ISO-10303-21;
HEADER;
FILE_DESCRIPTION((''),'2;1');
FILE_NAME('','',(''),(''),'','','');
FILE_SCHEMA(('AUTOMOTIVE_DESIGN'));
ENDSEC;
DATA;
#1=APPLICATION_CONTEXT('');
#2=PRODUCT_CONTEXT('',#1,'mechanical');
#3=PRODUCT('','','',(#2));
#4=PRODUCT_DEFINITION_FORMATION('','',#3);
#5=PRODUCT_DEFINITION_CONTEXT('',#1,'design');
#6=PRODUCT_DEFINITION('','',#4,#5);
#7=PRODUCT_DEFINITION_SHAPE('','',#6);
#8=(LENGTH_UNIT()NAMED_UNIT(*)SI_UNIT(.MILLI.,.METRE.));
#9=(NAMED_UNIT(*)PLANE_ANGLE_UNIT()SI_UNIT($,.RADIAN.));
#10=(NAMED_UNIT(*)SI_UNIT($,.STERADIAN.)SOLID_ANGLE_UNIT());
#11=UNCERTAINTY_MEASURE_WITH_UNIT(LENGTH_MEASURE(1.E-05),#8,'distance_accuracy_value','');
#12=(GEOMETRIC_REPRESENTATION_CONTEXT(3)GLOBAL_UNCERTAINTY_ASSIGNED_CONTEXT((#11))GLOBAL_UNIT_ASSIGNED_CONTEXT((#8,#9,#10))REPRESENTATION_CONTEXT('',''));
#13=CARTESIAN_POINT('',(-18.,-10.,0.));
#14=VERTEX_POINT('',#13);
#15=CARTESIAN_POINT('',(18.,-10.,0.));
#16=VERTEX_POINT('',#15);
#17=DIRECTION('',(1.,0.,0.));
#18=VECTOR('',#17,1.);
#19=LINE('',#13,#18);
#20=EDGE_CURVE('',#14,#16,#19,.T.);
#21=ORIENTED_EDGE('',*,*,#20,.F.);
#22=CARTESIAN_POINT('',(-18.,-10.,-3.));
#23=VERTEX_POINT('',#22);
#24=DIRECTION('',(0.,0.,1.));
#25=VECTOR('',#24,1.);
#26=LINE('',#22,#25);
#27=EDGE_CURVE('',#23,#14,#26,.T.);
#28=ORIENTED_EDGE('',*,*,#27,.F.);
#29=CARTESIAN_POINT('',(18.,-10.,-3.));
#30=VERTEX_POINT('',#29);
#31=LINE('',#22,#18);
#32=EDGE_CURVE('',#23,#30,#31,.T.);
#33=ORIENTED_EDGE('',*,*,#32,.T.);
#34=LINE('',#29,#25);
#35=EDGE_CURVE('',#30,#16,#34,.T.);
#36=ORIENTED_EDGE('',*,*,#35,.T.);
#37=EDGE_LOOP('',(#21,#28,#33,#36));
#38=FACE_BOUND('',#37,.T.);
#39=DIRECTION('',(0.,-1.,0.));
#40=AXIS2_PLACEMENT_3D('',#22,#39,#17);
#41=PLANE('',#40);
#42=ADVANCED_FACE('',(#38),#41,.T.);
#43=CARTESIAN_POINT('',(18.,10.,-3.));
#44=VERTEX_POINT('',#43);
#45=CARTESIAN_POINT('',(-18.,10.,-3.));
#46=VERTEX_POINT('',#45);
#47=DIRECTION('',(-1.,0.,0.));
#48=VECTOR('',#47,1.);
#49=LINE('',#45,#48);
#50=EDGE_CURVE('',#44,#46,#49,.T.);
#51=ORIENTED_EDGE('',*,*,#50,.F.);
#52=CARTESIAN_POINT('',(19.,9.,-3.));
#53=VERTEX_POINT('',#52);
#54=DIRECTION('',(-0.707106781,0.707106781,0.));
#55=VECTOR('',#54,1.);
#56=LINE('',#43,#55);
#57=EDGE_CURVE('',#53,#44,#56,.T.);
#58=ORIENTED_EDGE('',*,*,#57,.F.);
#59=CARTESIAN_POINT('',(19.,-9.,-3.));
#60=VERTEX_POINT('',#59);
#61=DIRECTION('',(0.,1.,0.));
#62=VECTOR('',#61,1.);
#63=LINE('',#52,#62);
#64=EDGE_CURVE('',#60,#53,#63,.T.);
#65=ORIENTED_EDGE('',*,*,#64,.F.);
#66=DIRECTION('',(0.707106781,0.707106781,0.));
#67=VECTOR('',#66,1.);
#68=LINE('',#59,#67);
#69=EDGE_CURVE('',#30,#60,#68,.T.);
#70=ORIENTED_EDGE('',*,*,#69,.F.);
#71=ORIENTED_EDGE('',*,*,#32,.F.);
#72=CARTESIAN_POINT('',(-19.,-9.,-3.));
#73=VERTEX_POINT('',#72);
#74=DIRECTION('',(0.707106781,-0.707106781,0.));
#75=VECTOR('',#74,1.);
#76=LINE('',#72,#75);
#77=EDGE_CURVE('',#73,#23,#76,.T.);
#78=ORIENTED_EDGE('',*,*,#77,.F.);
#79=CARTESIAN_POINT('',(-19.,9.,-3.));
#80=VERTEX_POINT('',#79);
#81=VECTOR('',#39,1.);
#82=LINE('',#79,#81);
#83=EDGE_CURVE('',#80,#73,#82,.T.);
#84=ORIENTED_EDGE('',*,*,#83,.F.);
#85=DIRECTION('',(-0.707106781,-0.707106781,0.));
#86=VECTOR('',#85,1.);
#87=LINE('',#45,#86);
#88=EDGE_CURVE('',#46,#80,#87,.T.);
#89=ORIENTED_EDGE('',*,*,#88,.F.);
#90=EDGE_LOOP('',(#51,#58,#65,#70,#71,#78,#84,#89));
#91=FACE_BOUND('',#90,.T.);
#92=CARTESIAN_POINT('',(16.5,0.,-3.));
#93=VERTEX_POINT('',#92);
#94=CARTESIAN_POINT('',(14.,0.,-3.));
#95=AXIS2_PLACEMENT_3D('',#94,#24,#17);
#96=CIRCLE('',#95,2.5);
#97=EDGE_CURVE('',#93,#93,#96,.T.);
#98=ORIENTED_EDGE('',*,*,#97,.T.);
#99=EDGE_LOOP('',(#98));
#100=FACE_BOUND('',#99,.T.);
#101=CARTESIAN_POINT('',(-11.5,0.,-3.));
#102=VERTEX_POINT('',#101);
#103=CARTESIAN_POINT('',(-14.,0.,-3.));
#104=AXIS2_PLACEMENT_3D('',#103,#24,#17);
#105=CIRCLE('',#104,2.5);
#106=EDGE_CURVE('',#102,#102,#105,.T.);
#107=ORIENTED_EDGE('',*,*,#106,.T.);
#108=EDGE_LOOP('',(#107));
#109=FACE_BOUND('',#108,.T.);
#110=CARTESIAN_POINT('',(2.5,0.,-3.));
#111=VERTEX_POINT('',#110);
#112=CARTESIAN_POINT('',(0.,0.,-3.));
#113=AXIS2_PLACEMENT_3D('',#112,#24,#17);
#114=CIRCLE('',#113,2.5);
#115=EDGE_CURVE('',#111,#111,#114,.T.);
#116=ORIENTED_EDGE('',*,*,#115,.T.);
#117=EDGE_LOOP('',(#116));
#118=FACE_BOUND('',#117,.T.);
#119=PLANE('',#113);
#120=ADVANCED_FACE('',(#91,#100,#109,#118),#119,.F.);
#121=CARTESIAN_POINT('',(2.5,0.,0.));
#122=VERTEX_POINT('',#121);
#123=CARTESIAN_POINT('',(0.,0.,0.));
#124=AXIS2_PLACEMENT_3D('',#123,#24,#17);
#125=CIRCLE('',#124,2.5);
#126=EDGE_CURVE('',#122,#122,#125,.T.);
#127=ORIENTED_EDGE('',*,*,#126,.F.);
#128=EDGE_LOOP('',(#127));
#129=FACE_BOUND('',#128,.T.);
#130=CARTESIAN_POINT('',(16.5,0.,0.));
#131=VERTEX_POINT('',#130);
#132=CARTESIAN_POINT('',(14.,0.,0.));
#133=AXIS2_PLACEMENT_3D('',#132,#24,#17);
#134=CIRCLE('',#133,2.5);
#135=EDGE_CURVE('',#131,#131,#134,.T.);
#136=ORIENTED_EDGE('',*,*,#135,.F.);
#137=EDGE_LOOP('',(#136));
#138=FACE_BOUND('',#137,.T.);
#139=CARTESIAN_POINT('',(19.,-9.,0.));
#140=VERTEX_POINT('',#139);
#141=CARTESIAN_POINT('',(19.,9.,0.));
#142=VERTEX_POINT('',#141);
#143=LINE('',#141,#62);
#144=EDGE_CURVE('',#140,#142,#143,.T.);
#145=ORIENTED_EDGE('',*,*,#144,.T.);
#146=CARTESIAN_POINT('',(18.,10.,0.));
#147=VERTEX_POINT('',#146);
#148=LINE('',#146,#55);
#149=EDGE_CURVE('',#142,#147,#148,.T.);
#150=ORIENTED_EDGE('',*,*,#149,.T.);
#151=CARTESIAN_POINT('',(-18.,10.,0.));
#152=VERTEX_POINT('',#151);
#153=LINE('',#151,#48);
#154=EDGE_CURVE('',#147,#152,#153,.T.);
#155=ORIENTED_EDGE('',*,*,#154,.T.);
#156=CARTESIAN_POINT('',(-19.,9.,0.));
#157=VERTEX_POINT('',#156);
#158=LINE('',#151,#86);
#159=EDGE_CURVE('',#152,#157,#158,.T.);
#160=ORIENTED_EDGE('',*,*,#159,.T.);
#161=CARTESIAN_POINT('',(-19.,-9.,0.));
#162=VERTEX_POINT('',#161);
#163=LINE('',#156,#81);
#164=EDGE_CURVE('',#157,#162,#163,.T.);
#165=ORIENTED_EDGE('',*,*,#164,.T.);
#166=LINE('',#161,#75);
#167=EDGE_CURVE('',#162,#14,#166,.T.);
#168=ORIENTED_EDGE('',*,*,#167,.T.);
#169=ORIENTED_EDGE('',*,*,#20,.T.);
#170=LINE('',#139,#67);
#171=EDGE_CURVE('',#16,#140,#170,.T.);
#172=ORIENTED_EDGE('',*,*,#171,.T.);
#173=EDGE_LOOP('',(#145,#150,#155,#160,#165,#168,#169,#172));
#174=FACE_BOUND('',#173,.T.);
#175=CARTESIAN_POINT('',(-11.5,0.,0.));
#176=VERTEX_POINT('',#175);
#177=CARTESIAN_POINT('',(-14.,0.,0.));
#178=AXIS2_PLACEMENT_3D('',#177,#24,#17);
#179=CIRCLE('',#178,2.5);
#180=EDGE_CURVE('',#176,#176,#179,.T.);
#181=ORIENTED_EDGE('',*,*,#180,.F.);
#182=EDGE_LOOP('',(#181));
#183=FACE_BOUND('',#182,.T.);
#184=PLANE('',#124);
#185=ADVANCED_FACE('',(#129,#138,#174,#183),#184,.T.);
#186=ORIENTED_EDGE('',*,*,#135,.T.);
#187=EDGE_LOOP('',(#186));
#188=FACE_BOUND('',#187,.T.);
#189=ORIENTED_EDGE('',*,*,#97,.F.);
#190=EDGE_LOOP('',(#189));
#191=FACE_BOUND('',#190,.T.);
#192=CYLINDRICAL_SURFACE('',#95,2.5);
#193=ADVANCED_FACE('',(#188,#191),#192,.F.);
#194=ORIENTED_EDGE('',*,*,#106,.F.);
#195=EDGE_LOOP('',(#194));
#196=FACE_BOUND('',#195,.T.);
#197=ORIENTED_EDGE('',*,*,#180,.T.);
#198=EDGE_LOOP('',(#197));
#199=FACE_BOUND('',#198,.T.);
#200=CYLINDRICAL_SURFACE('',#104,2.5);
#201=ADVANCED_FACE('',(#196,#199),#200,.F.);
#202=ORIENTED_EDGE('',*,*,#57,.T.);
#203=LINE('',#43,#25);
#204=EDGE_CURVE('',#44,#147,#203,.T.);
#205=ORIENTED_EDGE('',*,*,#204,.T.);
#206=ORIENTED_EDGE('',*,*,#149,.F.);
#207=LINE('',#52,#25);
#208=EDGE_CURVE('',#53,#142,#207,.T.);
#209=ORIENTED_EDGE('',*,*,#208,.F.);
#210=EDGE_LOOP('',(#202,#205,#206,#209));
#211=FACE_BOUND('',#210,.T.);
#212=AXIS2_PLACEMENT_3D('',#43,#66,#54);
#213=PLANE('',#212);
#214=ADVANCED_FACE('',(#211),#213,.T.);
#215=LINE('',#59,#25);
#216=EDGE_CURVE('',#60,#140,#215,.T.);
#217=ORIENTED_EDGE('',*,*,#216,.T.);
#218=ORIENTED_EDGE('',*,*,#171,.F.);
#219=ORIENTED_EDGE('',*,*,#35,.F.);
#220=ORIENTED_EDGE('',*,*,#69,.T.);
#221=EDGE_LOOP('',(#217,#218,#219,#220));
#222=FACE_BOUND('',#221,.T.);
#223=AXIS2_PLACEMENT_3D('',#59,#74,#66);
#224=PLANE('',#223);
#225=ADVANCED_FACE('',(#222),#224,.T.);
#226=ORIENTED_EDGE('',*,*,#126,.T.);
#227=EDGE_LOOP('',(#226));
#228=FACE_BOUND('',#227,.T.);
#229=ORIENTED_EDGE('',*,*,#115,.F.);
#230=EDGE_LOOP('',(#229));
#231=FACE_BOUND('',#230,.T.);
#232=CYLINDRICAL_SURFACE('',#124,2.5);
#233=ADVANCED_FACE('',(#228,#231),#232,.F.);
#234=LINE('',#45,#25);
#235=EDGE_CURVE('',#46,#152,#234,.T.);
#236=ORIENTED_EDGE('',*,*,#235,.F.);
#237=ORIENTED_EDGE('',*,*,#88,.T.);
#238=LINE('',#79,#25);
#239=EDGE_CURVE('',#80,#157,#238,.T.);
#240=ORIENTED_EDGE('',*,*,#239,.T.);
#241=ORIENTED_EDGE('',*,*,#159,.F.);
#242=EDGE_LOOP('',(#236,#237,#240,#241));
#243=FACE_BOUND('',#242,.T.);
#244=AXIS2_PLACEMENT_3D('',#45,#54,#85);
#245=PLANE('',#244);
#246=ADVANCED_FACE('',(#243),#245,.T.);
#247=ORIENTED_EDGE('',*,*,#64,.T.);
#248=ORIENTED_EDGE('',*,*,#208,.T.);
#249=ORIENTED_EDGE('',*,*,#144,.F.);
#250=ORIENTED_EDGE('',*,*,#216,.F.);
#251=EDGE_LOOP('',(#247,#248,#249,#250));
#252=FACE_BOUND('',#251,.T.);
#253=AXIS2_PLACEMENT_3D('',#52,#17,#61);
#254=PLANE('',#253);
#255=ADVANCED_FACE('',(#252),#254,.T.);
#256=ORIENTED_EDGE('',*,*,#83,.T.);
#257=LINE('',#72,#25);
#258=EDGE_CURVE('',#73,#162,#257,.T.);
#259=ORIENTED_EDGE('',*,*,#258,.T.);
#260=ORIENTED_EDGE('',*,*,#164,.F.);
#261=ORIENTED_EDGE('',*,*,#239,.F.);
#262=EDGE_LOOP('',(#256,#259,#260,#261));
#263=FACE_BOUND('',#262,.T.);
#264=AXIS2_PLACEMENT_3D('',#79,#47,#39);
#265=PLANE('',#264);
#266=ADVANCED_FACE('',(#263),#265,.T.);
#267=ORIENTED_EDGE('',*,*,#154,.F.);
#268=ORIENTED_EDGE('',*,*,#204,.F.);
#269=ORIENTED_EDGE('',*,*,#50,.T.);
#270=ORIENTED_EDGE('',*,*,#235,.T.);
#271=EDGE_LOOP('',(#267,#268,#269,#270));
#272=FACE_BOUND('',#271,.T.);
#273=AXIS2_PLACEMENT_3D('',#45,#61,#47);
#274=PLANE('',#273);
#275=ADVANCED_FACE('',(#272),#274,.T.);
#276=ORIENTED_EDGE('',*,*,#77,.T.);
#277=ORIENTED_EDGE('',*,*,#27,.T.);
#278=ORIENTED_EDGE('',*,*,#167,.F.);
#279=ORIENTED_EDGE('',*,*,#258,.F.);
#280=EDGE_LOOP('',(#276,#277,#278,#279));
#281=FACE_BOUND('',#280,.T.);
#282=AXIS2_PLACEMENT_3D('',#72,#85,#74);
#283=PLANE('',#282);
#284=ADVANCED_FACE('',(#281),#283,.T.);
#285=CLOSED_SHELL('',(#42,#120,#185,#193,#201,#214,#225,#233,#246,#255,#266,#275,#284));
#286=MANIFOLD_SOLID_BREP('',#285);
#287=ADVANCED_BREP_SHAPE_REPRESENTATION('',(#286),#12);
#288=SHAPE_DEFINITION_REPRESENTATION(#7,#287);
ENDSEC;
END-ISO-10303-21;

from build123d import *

# Parameters (mm, degrees)
SKETCH_1_R             = 2.5
SM_BASE_FLANGE_1_DEPTH = 3
HOLE_WIZARD_M6_1_D     = 5
HOLE_WIZARD_M6_1_DEPTH = 19
HOLE_WIZARD_M6_1_TIP   = 1.502151548


# Sheet-metal steps are written as plain solids
with BuildPart() as part:
    # Sketch 1 → 基体-法兰1 (new body)
    with BuildSketch(Plane.XY):
        Polygon((-18, 10), (18, 10), (19, 9), (19, -9), (18, -10), (-18, -10), (-19, -9), (-19, 9), align=None)
        with Locations((-14, 0)):
            Circle(SKETCH_1_R, mode=Mode.SUBTRACT)
        with Locations((14, 0)):
            Circle(SKETCH_1_R, mode=Mode.SUBTRACT)
    extrude(amount=-SM_BASE_FLANGE_1_DEPTH)

    # M6 螺纹孔1
    with Locations(Plane.XY):
        with Locations((0, 0)):
            Hole(HOLE_WIZARD_M6_1_D / 2, depth=HOLE_WIZARD_M6_1_DEPTH)
            with Locations((0, 0, -(HOLE_WIZARD_M6_1_DEPTH + HOLE_WIZARD_M6_1_TIP / 2))):  # 118° drill point
                Cone(0, HOLE_WIZARD_M6_1_D / 2, HOLE_WIZARD_M6_1_TIP, mode=Mode.SUBTRACT)


solid = part.part
